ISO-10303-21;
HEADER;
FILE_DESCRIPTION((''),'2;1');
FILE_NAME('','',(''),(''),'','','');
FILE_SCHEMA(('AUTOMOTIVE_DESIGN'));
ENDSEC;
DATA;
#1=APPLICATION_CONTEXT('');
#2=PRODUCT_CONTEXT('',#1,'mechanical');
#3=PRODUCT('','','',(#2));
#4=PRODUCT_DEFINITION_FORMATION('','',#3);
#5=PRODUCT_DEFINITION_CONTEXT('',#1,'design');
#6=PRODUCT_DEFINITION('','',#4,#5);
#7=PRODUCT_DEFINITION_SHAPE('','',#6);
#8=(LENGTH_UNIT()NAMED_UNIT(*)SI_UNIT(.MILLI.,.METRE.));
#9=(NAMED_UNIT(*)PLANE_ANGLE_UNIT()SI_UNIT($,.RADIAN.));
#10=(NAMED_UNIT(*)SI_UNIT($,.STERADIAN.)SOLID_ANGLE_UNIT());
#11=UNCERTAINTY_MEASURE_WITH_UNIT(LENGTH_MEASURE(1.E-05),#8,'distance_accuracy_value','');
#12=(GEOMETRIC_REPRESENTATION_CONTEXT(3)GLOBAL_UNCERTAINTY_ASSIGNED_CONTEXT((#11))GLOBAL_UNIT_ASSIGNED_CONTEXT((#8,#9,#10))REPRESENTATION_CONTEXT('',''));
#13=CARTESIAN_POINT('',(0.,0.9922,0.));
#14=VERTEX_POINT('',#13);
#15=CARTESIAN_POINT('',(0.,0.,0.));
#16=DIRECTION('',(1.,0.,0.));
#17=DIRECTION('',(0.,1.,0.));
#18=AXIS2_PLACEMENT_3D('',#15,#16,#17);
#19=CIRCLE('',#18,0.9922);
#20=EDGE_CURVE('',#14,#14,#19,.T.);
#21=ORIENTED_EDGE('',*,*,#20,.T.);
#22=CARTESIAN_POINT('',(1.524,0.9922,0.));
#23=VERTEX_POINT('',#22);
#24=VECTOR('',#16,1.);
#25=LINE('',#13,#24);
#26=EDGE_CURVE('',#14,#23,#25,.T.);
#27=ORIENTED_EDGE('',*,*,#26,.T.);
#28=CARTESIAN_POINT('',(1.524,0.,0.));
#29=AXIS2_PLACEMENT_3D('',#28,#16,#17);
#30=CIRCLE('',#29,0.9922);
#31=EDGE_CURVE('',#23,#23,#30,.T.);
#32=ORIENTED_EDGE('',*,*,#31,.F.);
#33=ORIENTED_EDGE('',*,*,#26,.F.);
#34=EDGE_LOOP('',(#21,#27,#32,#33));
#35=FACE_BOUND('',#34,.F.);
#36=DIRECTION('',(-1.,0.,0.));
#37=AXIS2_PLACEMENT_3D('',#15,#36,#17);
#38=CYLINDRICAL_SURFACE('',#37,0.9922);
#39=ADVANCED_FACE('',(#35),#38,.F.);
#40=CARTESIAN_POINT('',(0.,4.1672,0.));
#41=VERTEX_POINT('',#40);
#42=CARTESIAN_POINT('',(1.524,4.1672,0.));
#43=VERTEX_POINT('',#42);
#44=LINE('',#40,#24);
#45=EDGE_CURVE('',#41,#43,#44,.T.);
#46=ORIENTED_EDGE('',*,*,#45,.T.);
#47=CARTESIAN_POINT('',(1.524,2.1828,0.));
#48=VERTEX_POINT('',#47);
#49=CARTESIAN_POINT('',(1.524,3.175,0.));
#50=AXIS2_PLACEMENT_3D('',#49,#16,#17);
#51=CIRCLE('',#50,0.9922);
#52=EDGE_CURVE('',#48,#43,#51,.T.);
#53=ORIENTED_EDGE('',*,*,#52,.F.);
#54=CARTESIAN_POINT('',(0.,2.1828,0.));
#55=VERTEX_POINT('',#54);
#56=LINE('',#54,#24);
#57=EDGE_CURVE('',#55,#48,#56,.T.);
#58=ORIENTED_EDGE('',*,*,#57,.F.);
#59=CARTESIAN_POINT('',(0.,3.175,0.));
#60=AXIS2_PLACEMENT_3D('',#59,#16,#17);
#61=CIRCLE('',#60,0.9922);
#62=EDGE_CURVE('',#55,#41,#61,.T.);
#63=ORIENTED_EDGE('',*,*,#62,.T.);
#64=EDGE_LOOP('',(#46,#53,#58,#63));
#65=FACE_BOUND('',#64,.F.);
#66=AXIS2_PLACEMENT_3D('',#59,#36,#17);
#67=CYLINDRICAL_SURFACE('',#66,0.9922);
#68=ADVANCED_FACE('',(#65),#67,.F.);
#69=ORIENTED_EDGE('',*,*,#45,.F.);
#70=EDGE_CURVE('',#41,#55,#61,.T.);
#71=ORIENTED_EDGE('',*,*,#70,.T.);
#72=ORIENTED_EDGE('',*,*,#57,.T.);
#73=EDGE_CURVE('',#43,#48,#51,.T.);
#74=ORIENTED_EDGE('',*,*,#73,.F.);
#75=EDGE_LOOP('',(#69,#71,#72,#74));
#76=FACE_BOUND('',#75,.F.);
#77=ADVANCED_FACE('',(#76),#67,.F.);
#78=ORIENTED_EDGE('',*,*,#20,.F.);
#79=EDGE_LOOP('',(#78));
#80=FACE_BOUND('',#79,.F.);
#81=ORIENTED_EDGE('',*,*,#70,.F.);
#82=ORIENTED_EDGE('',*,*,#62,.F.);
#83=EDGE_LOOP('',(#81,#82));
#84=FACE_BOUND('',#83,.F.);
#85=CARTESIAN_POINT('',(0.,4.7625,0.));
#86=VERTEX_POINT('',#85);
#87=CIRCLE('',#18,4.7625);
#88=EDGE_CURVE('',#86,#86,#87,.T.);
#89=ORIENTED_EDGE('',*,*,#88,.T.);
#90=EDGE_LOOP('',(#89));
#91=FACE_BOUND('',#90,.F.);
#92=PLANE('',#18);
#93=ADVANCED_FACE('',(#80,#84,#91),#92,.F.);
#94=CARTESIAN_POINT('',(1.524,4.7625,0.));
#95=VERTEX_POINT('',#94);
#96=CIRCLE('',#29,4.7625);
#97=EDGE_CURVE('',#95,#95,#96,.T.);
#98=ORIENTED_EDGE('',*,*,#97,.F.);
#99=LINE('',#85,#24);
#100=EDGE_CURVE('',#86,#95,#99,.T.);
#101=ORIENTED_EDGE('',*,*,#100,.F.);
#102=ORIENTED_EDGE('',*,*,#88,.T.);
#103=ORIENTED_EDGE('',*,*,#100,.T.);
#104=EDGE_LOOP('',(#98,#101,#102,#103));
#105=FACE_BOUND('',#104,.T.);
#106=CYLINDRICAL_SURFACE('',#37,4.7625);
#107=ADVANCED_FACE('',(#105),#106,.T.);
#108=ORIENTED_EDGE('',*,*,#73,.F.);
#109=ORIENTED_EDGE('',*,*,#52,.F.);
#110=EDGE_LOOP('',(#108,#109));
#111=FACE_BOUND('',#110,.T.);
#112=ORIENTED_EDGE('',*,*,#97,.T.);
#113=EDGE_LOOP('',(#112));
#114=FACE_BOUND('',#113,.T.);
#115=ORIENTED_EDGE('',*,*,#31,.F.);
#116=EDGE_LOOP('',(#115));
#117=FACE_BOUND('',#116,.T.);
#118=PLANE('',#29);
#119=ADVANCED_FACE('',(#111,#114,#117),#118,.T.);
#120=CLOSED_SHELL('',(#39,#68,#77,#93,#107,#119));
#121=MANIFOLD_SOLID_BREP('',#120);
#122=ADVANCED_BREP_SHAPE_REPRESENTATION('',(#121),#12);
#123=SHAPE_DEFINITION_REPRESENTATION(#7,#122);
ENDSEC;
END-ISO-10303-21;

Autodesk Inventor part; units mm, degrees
ref_plane "YZ Plane" through (0, 0, 0) normal (1, 0, 0) x (0, 1, 0)
ref_plane "XZ Plane" through (0, 0, 0) normal (0, 1, 0) x (-1, 0, 0)
ref_plane "XY Plane" through (0, 0, 0) normal (0, 0, 1) x (1, 0, 0)
sketch "Sketch1" plane through (0, 0, 0) normal (1, 0, 0) x (0, 1, 0)
  circle A0 centre (0, 0) radius 4.7625
  circle A1 centre (3.175, 0) radius 0.9922
  circle A2 centre (0, 0) radius 0.9922
  line L0 (0, 0) -> (3.175, 0)
  dimension "d0" = 9.525
  dimension "d1" = 1.9844
  dimension "d2" = 3.175
  dimension "d3" = 1.9844
extrude "Extrusion1" add sketch "Sketch1" along normal blind 1.524
properties part number "Crankshaft Crank Wheel"
